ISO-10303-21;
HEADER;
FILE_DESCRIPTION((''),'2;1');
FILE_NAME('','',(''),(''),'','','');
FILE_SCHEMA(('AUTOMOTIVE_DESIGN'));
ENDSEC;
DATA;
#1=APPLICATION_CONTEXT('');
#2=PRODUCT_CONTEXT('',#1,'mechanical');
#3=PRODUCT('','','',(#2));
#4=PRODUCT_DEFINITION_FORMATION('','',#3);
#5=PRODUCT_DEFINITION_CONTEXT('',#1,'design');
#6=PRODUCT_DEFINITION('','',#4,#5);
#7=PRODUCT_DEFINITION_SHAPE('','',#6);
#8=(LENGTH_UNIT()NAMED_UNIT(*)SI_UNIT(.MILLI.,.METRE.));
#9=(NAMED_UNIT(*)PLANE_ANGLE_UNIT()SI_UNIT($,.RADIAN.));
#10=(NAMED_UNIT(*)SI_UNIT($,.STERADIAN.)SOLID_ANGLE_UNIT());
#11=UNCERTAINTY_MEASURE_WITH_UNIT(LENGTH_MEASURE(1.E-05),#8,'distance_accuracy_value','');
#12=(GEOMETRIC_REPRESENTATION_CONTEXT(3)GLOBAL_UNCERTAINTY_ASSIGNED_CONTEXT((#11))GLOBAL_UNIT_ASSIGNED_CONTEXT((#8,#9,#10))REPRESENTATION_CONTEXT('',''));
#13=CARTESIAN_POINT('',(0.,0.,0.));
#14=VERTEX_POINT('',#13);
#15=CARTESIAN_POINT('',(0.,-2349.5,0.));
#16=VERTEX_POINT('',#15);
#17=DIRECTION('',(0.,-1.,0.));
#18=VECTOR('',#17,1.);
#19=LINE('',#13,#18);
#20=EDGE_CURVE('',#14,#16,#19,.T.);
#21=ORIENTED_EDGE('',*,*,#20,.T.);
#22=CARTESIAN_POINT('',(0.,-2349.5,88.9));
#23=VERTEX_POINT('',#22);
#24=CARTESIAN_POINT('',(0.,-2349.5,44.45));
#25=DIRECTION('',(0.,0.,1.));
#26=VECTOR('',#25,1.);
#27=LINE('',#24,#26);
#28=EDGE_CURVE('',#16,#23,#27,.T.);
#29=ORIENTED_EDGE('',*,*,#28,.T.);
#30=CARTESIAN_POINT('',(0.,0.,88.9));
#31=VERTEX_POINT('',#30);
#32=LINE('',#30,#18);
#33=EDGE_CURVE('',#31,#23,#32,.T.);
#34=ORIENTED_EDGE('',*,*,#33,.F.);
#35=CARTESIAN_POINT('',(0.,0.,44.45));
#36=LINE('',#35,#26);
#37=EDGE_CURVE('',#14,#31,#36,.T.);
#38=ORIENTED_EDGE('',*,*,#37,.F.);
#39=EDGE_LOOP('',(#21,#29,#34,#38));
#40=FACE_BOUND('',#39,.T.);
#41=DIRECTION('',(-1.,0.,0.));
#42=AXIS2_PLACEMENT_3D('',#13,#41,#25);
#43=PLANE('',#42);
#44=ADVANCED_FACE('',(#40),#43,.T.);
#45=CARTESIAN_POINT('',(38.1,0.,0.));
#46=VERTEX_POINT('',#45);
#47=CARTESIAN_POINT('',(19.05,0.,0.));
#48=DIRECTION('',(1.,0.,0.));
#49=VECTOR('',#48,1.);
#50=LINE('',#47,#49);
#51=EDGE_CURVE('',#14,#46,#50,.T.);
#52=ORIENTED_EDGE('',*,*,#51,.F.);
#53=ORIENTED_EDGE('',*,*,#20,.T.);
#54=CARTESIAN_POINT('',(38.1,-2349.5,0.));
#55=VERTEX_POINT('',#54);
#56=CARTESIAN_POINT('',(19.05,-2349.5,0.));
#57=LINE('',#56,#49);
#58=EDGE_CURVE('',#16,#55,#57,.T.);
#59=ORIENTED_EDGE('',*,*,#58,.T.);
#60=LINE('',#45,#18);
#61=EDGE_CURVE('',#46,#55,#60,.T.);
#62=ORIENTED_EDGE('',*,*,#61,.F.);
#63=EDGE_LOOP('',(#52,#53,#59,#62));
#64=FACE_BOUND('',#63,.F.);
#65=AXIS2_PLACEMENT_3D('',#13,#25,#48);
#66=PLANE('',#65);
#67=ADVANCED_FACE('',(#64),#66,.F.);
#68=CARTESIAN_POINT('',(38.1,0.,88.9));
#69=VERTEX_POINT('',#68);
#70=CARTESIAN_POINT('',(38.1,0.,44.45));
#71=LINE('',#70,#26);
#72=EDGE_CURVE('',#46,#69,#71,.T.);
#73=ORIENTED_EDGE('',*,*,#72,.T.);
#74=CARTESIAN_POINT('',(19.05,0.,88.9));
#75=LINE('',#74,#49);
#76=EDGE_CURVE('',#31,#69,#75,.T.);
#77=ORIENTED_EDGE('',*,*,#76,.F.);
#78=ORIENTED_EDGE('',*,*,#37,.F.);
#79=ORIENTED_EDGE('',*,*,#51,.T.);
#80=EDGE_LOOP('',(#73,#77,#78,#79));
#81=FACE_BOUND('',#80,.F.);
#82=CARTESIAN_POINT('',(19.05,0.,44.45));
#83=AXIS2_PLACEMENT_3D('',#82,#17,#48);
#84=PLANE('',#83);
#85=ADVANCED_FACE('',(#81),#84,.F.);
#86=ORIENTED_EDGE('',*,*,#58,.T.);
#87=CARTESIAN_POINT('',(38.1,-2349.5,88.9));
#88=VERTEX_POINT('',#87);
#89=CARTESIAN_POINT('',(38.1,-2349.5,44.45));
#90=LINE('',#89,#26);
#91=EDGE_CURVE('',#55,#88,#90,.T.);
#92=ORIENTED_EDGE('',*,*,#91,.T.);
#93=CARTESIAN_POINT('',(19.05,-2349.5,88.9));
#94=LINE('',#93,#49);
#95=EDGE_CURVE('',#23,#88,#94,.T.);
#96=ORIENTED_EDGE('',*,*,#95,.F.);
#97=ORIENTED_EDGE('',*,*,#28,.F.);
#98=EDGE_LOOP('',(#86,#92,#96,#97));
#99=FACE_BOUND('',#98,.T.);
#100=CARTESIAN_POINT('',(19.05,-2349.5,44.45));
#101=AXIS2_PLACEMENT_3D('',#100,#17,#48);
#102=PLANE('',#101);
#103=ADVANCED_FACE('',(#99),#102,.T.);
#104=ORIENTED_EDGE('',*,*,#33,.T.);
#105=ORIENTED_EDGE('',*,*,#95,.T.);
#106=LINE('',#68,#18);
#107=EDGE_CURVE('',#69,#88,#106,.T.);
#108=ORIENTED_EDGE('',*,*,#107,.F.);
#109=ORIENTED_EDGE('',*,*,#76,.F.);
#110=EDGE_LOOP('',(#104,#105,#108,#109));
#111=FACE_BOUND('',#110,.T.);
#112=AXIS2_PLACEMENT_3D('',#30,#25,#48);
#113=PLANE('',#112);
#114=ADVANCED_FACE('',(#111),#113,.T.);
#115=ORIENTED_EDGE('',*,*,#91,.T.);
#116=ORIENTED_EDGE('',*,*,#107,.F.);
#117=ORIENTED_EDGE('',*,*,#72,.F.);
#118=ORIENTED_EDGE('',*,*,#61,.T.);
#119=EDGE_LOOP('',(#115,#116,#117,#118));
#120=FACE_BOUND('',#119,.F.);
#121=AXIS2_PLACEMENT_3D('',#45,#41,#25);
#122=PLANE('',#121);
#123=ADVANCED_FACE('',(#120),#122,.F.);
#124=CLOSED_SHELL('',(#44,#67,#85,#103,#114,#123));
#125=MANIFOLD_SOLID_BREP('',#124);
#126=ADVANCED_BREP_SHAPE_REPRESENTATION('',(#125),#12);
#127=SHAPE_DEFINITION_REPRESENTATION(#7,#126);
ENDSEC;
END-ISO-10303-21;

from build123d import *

# Parameters (mm, degrees)
F1_W     = 38.1
F1_H     = 88.9
F2_DEPTH = 2349.5


# Not quite as in the source:
# - a variable given as a bare number and used for a length is read in inches; the dataset says mm whatever the document's units were


with BuildPart() as f2:
    # F1 (on Front) → F2 (new body)
    with BuildSketch(Plane.XZ):
        with Locations((19.05, 44.45)):
            Rectangle(F1_W, F1_H)
    extrude(amount=F2_DEPTH)


solid = f2.part
